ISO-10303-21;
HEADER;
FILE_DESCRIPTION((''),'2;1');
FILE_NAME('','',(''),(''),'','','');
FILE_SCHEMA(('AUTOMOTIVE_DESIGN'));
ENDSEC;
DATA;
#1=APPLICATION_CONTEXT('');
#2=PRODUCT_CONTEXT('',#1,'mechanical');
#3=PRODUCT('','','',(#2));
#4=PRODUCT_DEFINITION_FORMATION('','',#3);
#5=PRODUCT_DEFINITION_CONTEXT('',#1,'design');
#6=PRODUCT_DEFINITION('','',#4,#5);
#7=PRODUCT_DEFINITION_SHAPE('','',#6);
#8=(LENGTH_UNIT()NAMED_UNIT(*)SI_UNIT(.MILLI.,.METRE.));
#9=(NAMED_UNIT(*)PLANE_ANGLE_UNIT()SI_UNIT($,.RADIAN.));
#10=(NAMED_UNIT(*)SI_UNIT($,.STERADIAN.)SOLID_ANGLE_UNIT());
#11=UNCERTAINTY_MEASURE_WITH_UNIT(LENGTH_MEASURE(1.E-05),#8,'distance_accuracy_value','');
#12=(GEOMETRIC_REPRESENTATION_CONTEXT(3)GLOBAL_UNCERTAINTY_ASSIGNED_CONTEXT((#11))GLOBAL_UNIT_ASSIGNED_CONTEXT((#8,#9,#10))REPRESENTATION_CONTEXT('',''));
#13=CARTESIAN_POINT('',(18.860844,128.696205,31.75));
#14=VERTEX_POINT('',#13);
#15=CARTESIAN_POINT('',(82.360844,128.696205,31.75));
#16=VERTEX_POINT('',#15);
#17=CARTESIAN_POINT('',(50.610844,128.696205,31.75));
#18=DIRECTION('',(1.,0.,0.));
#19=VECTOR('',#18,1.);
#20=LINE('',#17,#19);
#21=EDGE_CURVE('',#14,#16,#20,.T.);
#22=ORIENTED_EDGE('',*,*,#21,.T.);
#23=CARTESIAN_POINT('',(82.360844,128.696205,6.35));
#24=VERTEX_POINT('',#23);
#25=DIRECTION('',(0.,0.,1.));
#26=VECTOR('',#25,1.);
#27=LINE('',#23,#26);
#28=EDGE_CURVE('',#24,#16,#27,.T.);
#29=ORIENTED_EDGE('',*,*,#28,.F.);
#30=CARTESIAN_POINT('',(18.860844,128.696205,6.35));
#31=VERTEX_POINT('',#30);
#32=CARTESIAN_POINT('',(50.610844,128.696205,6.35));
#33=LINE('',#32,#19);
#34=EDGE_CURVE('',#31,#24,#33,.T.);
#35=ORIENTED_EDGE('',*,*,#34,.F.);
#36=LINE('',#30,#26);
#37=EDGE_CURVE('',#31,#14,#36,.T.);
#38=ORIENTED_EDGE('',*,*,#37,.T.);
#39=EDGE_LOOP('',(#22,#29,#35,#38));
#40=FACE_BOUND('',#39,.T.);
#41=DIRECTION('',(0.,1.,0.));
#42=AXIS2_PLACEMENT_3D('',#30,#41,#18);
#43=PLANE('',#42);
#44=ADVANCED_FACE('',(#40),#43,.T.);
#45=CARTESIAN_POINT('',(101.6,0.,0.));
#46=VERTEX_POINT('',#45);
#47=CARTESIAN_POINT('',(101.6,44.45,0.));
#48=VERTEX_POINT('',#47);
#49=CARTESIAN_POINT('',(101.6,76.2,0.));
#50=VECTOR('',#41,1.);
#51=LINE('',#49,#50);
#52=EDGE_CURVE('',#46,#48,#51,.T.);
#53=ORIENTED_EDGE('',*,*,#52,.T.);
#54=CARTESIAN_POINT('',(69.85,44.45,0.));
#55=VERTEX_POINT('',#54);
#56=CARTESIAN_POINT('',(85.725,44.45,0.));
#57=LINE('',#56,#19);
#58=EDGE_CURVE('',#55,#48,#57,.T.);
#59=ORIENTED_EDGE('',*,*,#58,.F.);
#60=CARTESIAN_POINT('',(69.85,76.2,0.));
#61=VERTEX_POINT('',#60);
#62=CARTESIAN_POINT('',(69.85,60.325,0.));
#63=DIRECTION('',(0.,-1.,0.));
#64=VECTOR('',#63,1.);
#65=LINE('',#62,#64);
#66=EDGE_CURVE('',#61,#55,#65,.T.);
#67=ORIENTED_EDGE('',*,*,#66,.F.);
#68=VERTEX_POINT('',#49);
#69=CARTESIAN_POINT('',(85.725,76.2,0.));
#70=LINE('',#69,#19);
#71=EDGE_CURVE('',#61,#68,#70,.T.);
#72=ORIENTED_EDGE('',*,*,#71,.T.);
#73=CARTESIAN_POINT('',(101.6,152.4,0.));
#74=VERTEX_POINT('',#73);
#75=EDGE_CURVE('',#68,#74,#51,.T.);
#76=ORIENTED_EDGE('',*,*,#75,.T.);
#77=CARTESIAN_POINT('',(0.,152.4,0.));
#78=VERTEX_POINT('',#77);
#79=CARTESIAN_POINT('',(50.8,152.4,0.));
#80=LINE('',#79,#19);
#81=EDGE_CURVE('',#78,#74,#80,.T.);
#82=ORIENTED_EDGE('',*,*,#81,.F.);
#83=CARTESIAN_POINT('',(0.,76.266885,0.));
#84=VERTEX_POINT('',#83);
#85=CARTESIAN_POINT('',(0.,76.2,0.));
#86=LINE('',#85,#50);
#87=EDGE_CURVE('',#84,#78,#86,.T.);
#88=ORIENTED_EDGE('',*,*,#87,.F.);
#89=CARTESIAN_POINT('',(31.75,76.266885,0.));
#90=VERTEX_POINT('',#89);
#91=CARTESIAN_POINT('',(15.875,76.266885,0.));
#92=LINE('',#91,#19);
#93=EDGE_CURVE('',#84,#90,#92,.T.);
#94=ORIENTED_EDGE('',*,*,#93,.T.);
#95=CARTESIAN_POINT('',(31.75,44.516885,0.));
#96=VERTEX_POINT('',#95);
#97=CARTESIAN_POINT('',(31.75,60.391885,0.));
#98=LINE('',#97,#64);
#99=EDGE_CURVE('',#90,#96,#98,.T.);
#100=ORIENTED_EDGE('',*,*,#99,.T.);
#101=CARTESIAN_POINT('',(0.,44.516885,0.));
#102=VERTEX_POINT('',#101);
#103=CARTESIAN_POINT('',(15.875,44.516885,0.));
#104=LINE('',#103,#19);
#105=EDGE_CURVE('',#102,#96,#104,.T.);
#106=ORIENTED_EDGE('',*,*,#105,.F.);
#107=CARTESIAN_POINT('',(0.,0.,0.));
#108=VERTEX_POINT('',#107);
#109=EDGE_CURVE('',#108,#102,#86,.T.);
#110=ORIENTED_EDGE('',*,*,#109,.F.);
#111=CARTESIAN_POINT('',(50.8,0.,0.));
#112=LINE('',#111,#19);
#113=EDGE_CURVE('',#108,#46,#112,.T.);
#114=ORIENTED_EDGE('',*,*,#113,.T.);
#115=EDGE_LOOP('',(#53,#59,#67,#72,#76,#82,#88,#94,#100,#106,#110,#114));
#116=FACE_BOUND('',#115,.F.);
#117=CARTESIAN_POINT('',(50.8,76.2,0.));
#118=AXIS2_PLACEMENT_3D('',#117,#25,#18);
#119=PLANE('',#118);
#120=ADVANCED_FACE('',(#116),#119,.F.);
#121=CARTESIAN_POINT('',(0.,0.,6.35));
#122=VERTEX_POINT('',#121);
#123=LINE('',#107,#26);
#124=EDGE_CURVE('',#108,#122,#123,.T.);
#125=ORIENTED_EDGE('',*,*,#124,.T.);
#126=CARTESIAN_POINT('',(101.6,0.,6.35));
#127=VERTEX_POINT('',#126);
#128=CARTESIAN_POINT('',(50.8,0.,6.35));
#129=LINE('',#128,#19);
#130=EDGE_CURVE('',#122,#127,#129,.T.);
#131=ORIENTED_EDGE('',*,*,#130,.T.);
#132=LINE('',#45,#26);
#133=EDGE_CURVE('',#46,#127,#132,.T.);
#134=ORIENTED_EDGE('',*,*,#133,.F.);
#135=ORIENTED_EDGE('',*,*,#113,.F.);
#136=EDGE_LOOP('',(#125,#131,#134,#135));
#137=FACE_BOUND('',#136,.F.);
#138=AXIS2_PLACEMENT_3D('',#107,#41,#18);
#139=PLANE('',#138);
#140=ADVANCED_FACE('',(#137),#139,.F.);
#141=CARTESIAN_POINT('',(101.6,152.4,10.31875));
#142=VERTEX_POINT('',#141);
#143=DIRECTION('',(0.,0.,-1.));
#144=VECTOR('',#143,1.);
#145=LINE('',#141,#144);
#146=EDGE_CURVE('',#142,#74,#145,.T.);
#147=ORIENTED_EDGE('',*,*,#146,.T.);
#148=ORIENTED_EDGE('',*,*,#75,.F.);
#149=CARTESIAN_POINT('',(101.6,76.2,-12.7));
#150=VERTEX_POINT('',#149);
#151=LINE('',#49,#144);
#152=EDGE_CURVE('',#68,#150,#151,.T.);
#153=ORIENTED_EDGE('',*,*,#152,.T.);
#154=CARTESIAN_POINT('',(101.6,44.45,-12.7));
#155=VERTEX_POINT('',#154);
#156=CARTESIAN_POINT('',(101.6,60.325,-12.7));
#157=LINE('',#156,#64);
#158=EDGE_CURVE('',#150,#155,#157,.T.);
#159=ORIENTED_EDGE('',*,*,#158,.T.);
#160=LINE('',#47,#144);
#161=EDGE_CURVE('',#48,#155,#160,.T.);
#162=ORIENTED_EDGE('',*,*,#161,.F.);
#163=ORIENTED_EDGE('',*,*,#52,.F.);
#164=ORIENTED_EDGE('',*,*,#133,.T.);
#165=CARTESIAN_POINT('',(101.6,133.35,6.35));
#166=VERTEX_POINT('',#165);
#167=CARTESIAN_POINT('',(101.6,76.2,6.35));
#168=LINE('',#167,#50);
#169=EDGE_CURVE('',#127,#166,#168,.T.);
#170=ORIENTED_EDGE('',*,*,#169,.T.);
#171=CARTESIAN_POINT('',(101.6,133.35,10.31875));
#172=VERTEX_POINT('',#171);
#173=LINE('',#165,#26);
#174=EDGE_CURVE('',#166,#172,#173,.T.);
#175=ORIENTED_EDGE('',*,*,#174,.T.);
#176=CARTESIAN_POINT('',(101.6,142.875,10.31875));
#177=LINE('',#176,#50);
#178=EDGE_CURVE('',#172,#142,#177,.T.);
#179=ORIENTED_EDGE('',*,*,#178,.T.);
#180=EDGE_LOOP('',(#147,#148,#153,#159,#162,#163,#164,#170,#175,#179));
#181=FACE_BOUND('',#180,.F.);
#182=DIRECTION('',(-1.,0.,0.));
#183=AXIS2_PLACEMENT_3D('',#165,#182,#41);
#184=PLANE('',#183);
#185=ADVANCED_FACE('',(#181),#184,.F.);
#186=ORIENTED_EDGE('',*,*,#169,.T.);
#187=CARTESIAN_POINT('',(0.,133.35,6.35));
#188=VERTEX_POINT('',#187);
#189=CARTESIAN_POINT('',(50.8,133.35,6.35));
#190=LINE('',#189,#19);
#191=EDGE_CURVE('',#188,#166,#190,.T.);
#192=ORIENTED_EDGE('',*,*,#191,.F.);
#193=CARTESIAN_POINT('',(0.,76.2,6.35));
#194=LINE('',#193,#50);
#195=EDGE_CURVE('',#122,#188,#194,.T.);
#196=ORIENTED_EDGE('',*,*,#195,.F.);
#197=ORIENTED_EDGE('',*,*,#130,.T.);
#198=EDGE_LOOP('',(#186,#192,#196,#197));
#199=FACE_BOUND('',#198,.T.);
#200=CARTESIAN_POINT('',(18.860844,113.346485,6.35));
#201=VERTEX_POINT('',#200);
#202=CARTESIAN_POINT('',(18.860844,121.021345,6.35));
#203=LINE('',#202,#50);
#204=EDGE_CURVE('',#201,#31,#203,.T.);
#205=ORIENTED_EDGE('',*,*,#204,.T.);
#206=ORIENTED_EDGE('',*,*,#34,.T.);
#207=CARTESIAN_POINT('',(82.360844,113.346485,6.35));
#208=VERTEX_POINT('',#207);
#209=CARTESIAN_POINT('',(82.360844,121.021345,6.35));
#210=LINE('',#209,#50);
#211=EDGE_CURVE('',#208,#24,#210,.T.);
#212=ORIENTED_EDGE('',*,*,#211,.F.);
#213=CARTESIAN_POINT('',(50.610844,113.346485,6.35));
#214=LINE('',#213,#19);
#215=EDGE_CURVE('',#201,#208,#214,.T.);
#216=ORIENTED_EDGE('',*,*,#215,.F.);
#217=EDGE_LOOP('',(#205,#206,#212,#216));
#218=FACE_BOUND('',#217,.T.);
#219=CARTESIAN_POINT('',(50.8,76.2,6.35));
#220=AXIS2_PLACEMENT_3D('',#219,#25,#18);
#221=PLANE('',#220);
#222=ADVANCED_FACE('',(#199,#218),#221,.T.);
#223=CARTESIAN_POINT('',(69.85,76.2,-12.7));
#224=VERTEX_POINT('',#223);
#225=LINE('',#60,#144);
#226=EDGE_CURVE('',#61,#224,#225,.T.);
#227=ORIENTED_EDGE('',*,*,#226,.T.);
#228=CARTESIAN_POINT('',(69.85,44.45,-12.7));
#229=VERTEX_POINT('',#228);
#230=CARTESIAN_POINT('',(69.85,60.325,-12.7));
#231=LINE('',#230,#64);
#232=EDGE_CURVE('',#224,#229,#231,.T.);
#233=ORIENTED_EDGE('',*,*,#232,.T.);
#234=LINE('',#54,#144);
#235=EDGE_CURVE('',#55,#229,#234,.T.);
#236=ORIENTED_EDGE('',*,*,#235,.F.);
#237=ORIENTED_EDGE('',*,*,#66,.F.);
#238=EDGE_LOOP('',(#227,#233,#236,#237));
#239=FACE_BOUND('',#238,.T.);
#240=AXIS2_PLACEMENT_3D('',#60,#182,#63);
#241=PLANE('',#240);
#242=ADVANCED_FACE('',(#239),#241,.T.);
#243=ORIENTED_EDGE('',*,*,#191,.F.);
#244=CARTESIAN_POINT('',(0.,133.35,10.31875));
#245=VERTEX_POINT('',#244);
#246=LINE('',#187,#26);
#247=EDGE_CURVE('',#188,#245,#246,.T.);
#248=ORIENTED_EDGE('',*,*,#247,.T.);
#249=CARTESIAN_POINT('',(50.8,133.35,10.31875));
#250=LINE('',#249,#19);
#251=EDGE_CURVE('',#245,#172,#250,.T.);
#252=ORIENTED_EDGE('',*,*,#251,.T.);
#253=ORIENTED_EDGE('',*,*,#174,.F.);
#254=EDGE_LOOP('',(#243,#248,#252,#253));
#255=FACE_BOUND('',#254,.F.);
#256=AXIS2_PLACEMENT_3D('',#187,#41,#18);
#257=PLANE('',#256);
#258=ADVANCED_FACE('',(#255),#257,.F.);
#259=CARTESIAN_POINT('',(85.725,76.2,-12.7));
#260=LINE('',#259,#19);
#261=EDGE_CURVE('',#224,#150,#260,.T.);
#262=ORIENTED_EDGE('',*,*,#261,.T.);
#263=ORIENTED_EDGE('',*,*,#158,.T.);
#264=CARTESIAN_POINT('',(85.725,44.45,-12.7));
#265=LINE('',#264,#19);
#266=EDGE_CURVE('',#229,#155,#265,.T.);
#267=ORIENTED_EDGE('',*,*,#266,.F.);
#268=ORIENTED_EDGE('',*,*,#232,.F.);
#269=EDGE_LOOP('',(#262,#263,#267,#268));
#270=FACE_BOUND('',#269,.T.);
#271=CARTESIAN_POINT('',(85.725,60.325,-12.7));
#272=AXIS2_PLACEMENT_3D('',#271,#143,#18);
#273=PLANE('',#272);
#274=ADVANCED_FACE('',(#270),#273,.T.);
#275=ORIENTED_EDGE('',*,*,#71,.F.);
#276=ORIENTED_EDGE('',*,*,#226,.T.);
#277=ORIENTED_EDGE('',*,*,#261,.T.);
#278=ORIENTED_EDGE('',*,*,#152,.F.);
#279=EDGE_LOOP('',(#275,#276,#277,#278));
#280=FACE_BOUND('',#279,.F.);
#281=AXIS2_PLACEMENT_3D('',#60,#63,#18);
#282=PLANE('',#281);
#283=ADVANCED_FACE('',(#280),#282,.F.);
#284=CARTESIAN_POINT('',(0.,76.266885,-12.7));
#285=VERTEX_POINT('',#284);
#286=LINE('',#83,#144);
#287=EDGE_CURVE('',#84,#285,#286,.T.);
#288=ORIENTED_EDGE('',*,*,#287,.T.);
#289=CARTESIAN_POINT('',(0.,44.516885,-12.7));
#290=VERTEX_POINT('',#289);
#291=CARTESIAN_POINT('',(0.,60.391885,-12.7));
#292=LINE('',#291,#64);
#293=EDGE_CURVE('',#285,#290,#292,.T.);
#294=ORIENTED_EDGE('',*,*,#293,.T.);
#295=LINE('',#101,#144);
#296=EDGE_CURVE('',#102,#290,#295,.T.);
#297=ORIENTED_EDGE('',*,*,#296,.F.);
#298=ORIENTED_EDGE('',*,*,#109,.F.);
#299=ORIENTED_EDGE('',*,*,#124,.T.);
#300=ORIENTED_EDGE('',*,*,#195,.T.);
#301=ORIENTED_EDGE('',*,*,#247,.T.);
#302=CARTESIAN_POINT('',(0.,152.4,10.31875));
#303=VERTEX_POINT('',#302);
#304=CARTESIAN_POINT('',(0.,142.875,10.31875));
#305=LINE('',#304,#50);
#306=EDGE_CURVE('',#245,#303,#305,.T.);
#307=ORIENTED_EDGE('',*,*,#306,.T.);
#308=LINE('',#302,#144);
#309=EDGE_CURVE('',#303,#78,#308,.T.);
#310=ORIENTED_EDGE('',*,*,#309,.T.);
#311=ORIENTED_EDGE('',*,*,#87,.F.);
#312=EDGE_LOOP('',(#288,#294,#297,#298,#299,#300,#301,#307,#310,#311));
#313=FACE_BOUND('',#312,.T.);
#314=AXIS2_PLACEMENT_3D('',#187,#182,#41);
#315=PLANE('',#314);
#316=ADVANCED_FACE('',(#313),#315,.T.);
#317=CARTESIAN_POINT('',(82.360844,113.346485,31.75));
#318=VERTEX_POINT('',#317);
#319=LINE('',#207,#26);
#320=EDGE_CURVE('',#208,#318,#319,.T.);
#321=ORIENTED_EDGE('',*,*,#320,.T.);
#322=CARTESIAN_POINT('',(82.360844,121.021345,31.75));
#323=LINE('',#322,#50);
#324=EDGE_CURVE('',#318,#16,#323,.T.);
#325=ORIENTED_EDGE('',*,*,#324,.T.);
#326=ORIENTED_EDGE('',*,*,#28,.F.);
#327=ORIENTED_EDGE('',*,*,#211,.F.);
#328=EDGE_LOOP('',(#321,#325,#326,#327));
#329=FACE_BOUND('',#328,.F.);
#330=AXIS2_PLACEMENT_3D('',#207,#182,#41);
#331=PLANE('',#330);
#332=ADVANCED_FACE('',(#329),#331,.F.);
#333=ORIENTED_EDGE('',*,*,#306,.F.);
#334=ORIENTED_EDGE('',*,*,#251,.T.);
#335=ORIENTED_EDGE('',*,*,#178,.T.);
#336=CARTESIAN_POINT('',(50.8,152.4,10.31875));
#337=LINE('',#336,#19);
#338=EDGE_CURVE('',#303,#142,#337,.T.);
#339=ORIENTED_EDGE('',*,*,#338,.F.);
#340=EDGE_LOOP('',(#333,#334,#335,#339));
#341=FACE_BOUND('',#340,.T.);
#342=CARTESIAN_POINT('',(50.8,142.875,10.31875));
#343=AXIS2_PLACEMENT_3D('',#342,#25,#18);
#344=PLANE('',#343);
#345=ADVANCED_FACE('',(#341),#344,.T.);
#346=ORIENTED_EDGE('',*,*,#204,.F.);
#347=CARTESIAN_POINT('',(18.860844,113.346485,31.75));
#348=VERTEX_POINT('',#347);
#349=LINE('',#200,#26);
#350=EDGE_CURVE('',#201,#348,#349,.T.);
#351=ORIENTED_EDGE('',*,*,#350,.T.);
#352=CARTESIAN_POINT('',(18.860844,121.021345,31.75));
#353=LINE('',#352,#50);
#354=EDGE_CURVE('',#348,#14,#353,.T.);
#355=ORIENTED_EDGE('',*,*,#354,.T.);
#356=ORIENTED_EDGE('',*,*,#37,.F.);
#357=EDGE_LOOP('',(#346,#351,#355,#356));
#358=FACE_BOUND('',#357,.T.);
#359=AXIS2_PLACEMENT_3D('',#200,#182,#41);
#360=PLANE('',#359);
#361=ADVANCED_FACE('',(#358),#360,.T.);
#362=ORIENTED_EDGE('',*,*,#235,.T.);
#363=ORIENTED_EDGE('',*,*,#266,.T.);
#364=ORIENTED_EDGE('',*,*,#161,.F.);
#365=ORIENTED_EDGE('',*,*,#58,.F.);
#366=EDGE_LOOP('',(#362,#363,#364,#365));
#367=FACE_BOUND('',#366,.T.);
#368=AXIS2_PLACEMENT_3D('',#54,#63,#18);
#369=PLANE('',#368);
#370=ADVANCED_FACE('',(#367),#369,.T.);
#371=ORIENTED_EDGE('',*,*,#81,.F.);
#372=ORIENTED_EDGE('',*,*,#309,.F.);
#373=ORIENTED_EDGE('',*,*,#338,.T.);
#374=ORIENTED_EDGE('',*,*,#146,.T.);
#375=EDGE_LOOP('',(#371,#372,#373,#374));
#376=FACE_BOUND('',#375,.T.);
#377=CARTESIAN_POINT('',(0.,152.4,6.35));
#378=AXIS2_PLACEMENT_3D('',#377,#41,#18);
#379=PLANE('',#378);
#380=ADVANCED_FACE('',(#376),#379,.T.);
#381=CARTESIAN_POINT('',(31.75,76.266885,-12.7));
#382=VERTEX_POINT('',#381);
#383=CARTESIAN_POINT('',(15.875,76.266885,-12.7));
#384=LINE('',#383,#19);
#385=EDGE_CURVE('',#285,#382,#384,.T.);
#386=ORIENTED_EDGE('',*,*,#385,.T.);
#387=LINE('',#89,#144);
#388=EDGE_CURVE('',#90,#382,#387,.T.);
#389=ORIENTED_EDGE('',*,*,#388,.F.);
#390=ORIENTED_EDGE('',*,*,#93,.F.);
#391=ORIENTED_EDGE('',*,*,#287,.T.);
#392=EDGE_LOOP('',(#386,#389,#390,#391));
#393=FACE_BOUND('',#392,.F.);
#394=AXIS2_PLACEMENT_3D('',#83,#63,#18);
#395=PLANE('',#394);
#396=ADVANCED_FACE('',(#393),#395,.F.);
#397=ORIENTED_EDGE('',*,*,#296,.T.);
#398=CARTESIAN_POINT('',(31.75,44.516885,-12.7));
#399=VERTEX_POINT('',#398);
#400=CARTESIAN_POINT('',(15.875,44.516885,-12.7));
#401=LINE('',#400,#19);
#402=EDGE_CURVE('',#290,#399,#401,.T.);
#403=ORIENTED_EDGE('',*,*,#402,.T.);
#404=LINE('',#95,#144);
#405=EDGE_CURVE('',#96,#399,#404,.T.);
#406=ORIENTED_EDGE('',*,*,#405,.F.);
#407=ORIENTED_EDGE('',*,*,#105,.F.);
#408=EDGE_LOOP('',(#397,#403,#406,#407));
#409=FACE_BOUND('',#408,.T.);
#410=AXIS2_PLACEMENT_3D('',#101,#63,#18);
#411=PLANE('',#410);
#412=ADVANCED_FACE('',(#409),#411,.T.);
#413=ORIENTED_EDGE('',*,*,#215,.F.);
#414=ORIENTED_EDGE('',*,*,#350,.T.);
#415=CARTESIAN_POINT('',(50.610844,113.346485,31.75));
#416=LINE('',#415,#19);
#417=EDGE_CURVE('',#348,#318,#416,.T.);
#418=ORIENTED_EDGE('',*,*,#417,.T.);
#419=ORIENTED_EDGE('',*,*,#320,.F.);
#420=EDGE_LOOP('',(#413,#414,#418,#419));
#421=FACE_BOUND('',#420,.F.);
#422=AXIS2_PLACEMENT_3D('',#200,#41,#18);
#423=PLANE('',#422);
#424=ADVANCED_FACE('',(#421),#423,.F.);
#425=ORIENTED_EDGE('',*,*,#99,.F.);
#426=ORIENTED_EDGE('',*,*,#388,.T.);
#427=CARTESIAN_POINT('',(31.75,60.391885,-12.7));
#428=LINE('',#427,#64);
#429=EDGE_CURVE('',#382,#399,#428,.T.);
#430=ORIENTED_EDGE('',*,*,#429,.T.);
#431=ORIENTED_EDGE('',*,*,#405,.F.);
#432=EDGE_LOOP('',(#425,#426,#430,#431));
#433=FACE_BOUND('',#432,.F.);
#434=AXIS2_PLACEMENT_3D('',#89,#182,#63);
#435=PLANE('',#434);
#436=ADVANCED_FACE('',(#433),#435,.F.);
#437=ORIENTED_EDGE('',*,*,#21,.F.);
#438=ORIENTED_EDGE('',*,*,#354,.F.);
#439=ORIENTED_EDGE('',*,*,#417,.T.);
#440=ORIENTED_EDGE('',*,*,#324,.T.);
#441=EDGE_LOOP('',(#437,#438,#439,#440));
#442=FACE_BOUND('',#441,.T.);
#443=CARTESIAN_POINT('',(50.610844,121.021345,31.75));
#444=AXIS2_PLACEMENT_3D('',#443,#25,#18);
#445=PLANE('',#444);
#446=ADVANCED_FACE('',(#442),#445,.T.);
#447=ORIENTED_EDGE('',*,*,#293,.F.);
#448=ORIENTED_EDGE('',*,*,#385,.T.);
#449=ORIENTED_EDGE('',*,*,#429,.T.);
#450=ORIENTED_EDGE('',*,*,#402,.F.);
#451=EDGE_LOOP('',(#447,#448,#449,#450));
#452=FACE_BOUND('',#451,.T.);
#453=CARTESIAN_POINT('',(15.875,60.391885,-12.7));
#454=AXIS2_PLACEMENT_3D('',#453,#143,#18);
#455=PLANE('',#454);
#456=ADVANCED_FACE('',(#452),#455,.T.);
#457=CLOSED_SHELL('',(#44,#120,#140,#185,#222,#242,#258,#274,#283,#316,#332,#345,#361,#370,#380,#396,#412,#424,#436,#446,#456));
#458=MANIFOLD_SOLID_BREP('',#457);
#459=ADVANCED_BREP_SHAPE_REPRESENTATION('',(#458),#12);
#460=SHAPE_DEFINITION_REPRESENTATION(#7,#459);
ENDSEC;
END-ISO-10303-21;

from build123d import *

# Parameters (mm, degrees)
F0_W     = 101.6
F0_H     = 152.4
F1_DEPTH = 6.35
F2_W     = 63.5
F2_H     = 15.3497201503
F3_DEPTH = 25.4
F4_W     = 101.6
F4_H     = 19.05
F5_DEPTH = 3.96875
F6_W     = 31.75
F6_H     = 31.75
F7_DEPTH = 12.7
F8_W     = 31.75
F8_H     = 31.75
F9_DEPTH = 12.7


# Not quite as in the source:
# - a length typed as a fraction of an inch, garbled in the dataset ("3 / 203.2 mm" for 3/8 in), is restored


with BuildPart() as f1:
    # F0 (on Top) → F1 (new body)
    with BuildSketch(Plane.XY):
        with Locations((50.8, 76.2)):
            Rectangle(F0_W, F0_H)
    extrude(amount=F1_DEPTH)

    # F2 (on face) → F3 (join)
    with BuildSketch(Plane.XY.offset(6.35)):
        with Locations((50.6108440459, 121.0213452578)):
            Rectangle(F2_W, F2_H)
    extrude(amount=F3_DEPTH)

    # F4 (on face) → F5 (join)
    with BuildSketch(Plane.XY.offset(6.35)):
        with Locations((50.8, 142.875)):
            Rectangle(F4_W, F4_H)
    extrude(amount=F5_DEPTH)

    # F6 (on face) → F7 (join)
    with BuildSketch(Plane(origin=(0, 0, 0), x_dir=(1, 0, 0), z_dir=(0, 0, -1))):
        with Locations((15.875, -60.3918848038)):
            Rectangle(F6_W, F6_H)
    extrude(amount=F7_DEPTH)

    # F8 (on face) → F9 (join)
    with BuildSketch(Plane(origin=(0, 0, 0), x_dir=(1, 0, 0), z_dir=(0, 0, -1))):
        with Locations((85.725, -60.325)):
            Rectangle(F8_W, F8_H)
    extrude(amount=F9_DEPTH)


solid = f1.part
